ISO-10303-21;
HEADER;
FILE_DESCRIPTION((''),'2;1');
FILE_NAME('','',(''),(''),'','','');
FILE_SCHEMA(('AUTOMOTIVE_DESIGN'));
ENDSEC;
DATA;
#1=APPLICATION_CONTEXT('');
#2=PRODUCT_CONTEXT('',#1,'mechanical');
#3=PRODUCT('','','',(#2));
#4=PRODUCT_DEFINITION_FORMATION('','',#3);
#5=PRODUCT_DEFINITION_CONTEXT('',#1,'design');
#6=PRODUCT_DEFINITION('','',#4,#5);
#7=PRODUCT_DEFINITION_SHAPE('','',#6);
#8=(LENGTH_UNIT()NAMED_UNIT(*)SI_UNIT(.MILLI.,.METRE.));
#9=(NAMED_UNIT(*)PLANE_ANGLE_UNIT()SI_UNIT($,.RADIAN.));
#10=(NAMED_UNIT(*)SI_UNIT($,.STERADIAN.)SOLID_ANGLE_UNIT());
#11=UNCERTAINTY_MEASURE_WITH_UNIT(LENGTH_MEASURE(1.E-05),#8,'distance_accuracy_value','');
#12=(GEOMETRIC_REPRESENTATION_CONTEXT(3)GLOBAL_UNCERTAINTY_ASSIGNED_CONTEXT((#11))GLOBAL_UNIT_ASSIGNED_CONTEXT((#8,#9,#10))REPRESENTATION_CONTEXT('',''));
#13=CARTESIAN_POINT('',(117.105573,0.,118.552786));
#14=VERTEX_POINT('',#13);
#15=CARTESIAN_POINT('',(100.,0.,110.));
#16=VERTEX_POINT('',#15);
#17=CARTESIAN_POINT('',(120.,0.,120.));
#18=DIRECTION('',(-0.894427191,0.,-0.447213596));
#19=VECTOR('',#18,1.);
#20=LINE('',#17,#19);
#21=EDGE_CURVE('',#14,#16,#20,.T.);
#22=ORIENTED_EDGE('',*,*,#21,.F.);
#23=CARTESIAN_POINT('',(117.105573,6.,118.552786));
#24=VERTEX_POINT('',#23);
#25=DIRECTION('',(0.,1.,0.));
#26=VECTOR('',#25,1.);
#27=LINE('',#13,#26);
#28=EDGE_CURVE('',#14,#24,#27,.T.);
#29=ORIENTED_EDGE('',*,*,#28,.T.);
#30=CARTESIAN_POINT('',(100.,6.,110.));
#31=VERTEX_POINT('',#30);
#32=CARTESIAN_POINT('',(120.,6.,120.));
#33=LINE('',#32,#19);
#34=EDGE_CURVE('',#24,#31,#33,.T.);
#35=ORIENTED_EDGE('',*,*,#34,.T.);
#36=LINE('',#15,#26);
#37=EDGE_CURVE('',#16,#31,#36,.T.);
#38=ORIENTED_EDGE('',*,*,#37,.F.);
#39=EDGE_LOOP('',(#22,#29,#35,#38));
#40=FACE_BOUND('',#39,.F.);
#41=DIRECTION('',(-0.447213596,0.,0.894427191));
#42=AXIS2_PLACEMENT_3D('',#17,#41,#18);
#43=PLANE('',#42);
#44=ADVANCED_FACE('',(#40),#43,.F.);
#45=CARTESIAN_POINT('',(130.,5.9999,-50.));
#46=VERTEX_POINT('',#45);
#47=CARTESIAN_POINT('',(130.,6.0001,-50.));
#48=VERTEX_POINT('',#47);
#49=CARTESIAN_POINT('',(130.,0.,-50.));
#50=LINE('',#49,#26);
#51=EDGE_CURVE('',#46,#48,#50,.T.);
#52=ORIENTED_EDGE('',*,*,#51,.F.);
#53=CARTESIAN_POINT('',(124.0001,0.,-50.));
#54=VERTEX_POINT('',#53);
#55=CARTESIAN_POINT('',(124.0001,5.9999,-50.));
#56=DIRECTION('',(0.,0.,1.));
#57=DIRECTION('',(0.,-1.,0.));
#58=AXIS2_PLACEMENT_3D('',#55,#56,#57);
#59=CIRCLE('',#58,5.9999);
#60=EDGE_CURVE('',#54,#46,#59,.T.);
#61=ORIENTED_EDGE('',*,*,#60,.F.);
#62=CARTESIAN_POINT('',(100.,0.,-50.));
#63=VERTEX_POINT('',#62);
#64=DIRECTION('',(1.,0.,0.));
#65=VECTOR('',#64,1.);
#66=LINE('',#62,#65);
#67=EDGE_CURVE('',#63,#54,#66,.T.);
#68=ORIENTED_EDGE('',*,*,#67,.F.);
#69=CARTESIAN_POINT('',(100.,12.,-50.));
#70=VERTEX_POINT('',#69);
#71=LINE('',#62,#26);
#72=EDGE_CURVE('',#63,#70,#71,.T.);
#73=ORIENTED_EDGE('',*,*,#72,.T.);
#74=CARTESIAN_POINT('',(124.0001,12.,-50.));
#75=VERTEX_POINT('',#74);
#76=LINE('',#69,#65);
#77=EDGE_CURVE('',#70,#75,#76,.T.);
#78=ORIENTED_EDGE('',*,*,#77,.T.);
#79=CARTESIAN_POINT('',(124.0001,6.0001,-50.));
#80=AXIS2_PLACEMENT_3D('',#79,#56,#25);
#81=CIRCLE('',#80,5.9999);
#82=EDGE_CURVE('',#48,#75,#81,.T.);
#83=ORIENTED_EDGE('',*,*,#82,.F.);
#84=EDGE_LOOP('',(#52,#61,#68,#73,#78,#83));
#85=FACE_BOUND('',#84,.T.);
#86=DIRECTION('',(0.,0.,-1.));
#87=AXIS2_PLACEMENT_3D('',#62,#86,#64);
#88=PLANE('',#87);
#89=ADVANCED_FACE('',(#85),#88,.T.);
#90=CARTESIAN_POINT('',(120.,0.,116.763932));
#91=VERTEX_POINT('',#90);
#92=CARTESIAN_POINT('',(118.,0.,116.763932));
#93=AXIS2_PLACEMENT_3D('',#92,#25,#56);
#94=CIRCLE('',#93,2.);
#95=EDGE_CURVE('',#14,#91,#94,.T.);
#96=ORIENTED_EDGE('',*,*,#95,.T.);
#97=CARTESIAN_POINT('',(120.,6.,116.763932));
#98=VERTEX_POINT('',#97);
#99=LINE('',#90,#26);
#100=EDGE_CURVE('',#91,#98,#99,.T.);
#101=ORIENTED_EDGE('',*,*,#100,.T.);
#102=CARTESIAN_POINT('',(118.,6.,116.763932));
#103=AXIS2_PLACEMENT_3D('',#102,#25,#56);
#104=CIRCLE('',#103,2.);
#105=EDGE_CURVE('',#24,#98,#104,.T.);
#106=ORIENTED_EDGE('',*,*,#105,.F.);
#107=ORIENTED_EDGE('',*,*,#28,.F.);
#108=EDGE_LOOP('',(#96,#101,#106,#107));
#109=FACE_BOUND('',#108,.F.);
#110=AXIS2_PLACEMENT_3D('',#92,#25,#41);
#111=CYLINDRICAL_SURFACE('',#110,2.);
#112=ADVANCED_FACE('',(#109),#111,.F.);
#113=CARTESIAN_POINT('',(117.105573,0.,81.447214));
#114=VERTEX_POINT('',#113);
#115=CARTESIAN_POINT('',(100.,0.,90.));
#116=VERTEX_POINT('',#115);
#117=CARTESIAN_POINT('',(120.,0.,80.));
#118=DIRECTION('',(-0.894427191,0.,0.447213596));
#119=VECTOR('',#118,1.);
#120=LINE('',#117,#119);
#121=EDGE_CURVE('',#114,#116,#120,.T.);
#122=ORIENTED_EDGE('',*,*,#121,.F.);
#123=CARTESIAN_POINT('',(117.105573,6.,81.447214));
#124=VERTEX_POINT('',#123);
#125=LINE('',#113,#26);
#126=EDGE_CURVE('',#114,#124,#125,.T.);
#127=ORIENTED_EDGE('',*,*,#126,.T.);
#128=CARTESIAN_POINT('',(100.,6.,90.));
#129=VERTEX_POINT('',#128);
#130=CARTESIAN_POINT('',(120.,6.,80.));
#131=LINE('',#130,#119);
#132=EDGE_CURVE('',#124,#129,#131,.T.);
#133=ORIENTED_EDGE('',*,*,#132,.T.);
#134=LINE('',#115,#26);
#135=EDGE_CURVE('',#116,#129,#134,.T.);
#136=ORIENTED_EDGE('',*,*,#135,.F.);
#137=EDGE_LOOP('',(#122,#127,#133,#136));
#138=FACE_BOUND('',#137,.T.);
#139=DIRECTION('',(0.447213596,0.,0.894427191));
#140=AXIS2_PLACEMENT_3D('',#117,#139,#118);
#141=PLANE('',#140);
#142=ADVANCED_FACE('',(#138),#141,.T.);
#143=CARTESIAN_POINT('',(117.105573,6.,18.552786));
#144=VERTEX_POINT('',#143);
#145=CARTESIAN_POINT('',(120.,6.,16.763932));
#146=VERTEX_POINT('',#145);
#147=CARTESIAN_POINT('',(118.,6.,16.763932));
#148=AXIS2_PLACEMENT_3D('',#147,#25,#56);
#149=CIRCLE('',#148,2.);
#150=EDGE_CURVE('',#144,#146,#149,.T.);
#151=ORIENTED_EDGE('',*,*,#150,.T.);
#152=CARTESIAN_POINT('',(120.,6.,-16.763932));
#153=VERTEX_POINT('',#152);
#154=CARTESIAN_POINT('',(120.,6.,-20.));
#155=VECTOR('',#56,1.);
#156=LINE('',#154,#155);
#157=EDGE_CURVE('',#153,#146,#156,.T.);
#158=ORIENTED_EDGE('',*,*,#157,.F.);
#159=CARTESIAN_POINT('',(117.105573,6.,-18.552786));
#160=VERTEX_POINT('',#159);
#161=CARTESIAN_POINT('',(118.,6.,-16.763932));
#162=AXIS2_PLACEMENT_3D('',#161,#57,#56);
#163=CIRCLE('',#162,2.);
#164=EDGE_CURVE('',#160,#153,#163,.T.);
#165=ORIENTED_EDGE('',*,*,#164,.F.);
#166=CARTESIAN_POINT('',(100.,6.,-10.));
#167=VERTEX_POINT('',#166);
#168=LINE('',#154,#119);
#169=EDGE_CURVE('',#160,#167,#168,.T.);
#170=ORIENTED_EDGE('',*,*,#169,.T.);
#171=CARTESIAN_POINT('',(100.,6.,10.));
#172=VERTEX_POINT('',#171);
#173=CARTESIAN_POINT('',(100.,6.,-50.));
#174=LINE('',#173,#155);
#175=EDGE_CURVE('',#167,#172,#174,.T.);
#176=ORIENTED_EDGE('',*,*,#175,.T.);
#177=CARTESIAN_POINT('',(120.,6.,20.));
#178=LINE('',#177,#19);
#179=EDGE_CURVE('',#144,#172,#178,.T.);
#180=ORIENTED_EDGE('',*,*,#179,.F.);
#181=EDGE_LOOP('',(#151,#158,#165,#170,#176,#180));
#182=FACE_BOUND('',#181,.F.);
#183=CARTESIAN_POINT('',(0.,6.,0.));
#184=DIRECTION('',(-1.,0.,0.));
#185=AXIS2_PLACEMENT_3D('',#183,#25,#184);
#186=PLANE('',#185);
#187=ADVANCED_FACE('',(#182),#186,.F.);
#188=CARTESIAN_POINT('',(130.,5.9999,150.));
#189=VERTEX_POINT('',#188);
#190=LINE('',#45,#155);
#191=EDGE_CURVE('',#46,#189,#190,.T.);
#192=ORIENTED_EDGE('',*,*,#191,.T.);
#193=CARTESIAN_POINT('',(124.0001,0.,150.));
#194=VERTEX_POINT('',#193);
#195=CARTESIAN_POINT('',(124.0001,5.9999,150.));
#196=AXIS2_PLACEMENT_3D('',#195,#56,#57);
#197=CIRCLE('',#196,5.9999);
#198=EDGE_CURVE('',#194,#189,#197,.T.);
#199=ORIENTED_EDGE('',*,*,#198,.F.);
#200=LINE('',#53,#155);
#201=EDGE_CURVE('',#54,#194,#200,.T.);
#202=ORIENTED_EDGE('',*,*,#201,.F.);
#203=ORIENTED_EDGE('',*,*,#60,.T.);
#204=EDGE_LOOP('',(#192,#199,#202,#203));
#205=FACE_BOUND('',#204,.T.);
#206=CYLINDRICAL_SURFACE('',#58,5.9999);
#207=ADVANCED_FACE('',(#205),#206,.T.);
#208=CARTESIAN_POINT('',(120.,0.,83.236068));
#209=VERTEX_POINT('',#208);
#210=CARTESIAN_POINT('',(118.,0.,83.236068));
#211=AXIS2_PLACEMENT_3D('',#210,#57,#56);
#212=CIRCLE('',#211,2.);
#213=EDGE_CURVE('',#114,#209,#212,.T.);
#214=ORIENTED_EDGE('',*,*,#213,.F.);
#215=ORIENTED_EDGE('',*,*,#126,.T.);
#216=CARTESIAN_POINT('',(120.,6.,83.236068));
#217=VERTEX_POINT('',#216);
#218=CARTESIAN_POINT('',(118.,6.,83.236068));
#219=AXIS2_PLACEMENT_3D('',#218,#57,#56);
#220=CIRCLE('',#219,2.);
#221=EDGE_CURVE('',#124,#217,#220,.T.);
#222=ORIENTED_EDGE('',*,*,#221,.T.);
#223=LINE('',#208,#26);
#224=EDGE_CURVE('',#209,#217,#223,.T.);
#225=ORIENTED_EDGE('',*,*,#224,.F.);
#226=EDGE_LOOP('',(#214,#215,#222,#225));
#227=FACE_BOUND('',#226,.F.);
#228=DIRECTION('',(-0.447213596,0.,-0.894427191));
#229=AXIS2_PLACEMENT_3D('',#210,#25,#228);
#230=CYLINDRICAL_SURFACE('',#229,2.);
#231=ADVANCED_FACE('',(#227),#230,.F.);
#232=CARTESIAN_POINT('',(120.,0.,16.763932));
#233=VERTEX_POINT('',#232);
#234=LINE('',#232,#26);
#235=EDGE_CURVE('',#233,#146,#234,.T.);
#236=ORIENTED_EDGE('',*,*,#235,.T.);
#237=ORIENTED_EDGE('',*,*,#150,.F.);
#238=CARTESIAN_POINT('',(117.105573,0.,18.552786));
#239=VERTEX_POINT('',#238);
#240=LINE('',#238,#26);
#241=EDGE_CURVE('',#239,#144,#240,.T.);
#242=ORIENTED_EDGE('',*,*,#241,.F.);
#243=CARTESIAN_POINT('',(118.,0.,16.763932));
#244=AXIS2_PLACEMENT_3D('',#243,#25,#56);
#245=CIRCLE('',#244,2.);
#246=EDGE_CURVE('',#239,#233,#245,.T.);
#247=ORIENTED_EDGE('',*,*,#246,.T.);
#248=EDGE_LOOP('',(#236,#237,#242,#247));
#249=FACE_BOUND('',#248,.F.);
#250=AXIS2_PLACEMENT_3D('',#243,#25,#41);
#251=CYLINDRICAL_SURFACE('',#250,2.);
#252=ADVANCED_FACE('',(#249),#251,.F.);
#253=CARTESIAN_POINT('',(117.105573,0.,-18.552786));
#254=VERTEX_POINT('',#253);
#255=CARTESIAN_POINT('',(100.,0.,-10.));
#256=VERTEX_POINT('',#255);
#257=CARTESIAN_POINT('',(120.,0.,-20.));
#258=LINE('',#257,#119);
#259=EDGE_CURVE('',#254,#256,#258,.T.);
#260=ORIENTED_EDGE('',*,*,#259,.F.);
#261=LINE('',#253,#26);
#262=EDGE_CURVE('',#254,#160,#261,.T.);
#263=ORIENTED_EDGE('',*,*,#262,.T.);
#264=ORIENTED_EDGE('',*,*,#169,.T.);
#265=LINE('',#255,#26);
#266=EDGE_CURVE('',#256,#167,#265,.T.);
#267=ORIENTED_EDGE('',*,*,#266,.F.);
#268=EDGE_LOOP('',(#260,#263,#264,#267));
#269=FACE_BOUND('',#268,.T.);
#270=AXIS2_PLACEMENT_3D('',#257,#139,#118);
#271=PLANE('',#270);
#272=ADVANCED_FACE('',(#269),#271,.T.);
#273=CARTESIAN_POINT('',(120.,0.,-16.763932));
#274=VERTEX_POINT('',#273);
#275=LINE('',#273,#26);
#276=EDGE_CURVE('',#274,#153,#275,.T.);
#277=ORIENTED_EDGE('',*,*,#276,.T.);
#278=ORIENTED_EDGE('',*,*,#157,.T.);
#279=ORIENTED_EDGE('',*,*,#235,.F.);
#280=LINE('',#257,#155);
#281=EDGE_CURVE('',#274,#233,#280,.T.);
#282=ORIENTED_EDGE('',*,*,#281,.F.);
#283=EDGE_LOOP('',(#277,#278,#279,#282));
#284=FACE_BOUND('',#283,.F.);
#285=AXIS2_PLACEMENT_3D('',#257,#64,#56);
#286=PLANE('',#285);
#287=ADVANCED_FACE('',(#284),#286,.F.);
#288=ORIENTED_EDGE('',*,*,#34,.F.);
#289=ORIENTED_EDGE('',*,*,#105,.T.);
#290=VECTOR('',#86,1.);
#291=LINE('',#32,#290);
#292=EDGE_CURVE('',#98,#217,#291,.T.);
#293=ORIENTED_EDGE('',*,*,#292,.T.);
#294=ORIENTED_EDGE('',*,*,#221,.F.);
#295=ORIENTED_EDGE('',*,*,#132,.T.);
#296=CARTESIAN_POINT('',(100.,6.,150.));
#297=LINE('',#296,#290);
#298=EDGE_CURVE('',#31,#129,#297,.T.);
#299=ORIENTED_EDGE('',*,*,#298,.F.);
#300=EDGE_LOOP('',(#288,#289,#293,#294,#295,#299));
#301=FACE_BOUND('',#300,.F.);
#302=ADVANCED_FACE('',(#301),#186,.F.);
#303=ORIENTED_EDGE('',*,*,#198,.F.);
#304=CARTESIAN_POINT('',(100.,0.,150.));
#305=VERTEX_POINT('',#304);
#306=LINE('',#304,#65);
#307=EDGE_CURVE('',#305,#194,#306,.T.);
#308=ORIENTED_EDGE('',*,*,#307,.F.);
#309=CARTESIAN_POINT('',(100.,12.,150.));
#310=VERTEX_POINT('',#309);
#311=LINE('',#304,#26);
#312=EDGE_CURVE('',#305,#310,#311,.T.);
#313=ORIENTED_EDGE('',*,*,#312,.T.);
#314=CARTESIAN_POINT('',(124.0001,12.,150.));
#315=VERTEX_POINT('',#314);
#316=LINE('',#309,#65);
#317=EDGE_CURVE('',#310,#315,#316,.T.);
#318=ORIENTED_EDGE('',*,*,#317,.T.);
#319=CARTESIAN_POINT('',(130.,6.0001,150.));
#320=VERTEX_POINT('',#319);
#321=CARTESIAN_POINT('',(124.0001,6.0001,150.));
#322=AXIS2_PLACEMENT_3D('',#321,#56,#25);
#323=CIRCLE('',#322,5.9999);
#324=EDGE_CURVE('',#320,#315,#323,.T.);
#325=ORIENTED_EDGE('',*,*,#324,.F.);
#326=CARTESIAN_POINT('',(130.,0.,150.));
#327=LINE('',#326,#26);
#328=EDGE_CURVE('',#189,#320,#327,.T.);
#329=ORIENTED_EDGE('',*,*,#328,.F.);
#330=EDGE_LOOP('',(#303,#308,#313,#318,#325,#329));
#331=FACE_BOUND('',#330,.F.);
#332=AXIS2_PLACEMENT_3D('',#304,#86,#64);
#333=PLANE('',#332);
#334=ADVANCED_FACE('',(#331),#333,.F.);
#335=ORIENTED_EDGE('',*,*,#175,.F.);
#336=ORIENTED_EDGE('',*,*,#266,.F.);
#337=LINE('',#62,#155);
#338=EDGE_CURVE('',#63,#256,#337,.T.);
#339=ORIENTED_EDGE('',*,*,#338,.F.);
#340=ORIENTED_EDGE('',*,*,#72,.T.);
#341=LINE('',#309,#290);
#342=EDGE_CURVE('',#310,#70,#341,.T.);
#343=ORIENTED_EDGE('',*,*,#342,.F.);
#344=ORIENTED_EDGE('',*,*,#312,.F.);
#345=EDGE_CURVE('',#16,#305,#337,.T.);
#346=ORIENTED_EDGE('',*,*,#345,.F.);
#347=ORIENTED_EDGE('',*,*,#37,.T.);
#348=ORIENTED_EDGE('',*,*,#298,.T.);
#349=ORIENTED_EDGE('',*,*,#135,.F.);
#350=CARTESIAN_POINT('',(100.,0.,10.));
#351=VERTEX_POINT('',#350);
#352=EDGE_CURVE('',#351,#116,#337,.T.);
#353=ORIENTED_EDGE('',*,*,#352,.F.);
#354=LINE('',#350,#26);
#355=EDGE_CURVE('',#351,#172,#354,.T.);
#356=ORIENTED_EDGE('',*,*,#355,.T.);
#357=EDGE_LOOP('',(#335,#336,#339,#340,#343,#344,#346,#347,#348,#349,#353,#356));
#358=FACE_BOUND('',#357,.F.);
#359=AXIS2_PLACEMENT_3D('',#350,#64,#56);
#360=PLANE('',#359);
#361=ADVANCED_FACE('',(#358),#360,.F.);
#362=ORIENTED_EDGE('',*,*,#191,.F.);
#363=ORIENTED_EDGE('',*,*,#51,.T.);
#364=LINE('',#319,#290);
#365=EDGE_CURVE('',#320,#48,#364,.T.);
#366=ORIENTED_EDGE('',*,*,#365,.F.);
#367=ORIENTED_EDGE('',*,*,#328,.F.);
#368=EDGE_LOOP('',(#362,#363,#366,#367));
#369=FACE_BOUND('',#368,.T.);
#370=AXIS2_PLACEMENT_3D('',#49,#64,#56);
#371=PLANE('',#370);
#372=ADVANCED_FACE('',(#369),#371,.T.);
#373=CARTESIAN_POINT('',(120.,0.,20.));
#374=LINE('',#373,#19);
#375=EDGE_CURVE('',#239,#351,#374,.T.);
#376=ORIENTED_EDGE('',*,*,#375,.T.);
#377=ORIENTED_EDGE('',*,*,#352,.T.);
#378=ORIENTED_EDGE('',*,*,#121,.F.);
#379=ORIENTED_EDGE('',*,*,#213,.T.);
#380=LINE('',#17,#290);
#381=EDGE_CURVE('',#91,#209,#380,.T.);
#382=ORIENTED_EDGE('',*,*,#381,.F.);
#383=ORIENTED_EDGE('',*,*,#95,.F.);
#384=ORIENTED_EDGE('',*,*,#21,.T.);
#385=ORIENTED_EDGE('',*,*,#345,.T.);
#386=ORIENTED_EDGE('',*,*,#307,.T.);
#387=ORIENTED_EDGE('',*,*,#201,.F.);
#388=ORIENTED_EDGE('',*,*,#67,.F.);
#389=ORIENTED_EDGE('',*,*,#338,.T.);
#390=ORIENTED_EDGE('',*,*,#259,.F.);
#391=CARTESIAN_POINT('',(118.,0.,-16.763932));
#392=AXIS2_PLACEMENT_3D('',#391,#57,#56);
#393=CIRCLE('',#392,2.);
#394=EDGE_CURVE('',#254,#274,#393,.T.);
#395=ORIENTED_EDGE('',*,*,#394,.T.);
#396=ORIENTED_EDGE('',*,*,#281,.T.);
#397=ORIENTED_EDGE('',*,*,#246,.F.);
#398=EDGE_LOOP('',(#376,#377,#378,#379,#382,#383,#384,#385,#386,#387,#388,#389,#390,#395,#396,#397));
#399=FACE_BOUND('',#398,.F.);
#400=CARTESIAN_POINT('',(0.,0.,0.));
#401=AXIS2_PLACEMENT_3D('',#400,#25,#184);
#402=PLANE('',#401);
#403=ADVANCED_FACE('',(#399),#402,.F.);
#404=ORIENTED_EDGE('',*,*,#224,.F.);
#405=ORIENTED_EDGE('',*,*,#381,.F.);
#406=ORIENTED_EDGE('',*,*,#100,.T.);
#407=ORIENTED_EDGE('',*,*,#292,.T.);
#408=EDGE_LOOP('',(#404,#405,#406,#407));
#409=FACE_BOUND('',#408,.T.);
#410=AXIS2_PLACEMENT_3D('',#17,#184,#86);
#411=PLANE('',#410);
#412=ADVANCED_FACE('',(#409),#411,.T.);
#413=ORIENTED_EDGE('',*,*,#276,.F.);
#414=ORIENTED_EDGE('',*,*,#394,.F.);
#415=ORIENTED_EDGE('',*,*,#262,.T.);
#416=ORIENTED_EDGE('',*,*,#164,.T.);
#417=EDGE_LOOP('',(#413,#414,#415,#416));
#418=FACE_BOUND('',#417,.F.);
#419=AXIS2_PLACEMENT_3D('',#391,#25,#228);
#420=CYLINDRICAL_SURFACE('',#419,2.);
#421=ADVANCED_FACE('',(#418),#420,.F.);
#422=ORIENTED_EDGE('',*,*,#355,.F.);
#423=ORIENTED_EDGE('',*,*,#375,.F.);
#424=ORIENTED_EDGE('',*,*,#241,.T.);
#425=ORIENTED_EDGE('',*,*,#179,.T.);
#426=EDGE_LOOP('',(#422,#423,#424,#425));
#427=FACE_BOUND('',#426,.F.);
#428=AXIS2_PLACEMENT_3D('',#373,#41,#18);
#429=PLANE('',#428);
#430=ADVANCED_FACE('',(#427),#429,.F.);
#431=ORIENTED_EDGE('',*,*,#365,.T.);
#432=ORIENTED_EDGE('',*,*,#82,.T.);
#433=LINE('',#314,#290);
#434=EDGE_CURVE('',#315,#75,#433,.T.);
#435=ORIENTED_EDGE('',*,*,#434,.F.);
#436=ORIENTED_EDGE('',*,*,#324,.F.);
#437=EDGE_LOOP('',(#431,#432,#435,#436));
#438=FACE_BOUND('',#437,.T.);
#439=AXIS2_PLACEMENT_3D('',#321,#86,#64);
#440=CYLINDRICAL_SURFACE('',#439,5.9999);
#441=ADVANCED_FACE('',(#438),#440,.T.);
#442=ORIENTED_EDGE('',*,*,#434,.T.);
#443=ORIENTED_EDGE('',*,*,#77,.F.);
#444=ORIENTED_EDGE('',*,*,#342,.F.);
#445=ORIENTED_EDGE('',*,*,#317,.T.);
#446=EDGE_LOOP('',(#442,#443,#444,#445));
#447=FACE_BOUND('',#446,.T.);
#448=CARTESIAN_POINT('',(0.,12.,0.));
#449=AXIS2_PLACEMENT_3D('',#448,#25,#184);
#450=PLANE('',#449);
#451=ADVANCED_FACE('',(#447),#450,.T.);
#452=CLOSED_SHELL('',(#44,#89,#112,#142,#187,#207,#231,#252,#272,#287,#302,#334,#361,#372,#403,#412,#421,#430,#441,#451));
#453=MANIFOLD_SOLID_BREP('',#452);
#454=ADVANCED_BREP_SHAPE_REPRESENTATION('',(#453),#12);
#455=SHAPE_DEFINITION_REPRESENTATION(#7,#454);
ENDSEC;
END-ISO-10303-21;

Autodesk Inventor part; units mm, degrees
ref_plane "YZ Plane" through (0, 0, 0) normal (1, 0, 0) x (0, 1, 0)
ref_plane "XZ Plane" through (0, 0, 0) normal (0, 1, 0) x (-1, 0, 0)
ref_plane "XY Plane" through (0, 0, 0) normal (0, 0, 1) x (1, 0, 0)
sketch "Sketch1" plane through (0, 0, 0) normal (0, 1, 0) x (-1, 0, 0)
  line L0 (100, -50) -> (-100, -50)
  line L1 (-100, -50) -> (-100, 50)
  line L2 (-100, 50) -> (100, 50)
  line L3 (100, 50) -> (100, -50)
  line L4 (100, -50) -> (-100, 50) construction
  line L5 (-100, -50) -> (100, 50) construction
  line L6 (-40, -30) -> (-80, -30)
  line L7 (-50, -50) -> (-70, -50)
  line L8 (-40, -30) -> (-50, -50)
  line L9 (-80, -30) -> (-70, -50)
  line L10 (80, -30) -> (40, -30)
  line L11 (70, -50) -> (50, -50)
  line L12 (80, -30) -> (70, -50)
  line L13 (40, -30) -> (50, -50)
  line L14 (-100, -10) -> (-100, 10)
  line L15 (-80, -20) -> (-80, 20)
  line L16 (-80, -20) -> (-100, -10)
  line L17 (-80, 20) -> (-100, 10)
  line L18 (100, -50) -> (-100, -50)
  line L19 (-100, -50) -> (-130, -50)
  line L20 (-130, -50) -> (-130, 50)
  line L21 (-130, 50) -> (-100, 50)
  line L22 (-100, 50) -> (-100, -50)
  line L23 (-120, -20) -> (-120, 20)
  line L24 (-120, -20) -> (-100, -10)
  line L25 (-120, 20) -> (-100, 10)
  line L26 (-100, 150) -> (-100, 50)
  line L27 (-100, 150) -> (-130, 150)
  line L28 (-130, 150) -> (-130, 50)
  line L29 (-120, 120) -> (-100, 110)
  line L30 (-120, 120) -> (-120, 80)
  line L31 (-120, 80) -> (-100, 90)
  point P0 (0, 0)
  point P1 (-100, 10)
  point P2 (-100, -10)
  point P3 (-70, -50)
  point P4 (-50, -50)
  point P5 (70, -50)
  point P6 (0, 0)
  point P7 (0, 0)
  point P8 (-100, -50)
  dimension "d72" = 200
  dimension "d73" = 100
  dimension "d78" = 20
  dimension "d79" = 40
  dimension "d80" = 20
  dimension "d81" = 10
  dimension "d82" = 20
  dimension "d83" = 40
  dimension "d84" = 20
  dimension "d85" = 10
  dimension "d86" = 120
  dimension "d87" = 30
  dimension "d88" = 0
  dimension "d89" = 0
  dimension "d90" = 40
  dimension "d91" = 20
  dimension "d92" = 20
  dimension "d93" = 10
  dimension "d94" = 40
  dimension "d95" = 0
  dimension "d122" = 30
extrude "Extrusion26" add sketch "Sketch1" along normal blind 12 contours L1 L25 L23 L24 L19 L20 L21 | L21 L28 L27 L26 L29 L30 L31 | L1 L24 L23 L25 | L31 L30 L29 L26
extrude "Extrusion27" cut sketch "Sketch1" along normal blind 6 contours L1 L24 L23 L25 | L31 L30 L29 L26
fillet "Fillet13" radius 2 4 edges at (120, 3, 120) (120, 3, 80) (120, 3, 20) (120, 3, -20)
fillet "Fillet14" radius 6 2 edges at (130, 12, 50) (130, 0, 50)
properties part number "Test2_3DPrint"
